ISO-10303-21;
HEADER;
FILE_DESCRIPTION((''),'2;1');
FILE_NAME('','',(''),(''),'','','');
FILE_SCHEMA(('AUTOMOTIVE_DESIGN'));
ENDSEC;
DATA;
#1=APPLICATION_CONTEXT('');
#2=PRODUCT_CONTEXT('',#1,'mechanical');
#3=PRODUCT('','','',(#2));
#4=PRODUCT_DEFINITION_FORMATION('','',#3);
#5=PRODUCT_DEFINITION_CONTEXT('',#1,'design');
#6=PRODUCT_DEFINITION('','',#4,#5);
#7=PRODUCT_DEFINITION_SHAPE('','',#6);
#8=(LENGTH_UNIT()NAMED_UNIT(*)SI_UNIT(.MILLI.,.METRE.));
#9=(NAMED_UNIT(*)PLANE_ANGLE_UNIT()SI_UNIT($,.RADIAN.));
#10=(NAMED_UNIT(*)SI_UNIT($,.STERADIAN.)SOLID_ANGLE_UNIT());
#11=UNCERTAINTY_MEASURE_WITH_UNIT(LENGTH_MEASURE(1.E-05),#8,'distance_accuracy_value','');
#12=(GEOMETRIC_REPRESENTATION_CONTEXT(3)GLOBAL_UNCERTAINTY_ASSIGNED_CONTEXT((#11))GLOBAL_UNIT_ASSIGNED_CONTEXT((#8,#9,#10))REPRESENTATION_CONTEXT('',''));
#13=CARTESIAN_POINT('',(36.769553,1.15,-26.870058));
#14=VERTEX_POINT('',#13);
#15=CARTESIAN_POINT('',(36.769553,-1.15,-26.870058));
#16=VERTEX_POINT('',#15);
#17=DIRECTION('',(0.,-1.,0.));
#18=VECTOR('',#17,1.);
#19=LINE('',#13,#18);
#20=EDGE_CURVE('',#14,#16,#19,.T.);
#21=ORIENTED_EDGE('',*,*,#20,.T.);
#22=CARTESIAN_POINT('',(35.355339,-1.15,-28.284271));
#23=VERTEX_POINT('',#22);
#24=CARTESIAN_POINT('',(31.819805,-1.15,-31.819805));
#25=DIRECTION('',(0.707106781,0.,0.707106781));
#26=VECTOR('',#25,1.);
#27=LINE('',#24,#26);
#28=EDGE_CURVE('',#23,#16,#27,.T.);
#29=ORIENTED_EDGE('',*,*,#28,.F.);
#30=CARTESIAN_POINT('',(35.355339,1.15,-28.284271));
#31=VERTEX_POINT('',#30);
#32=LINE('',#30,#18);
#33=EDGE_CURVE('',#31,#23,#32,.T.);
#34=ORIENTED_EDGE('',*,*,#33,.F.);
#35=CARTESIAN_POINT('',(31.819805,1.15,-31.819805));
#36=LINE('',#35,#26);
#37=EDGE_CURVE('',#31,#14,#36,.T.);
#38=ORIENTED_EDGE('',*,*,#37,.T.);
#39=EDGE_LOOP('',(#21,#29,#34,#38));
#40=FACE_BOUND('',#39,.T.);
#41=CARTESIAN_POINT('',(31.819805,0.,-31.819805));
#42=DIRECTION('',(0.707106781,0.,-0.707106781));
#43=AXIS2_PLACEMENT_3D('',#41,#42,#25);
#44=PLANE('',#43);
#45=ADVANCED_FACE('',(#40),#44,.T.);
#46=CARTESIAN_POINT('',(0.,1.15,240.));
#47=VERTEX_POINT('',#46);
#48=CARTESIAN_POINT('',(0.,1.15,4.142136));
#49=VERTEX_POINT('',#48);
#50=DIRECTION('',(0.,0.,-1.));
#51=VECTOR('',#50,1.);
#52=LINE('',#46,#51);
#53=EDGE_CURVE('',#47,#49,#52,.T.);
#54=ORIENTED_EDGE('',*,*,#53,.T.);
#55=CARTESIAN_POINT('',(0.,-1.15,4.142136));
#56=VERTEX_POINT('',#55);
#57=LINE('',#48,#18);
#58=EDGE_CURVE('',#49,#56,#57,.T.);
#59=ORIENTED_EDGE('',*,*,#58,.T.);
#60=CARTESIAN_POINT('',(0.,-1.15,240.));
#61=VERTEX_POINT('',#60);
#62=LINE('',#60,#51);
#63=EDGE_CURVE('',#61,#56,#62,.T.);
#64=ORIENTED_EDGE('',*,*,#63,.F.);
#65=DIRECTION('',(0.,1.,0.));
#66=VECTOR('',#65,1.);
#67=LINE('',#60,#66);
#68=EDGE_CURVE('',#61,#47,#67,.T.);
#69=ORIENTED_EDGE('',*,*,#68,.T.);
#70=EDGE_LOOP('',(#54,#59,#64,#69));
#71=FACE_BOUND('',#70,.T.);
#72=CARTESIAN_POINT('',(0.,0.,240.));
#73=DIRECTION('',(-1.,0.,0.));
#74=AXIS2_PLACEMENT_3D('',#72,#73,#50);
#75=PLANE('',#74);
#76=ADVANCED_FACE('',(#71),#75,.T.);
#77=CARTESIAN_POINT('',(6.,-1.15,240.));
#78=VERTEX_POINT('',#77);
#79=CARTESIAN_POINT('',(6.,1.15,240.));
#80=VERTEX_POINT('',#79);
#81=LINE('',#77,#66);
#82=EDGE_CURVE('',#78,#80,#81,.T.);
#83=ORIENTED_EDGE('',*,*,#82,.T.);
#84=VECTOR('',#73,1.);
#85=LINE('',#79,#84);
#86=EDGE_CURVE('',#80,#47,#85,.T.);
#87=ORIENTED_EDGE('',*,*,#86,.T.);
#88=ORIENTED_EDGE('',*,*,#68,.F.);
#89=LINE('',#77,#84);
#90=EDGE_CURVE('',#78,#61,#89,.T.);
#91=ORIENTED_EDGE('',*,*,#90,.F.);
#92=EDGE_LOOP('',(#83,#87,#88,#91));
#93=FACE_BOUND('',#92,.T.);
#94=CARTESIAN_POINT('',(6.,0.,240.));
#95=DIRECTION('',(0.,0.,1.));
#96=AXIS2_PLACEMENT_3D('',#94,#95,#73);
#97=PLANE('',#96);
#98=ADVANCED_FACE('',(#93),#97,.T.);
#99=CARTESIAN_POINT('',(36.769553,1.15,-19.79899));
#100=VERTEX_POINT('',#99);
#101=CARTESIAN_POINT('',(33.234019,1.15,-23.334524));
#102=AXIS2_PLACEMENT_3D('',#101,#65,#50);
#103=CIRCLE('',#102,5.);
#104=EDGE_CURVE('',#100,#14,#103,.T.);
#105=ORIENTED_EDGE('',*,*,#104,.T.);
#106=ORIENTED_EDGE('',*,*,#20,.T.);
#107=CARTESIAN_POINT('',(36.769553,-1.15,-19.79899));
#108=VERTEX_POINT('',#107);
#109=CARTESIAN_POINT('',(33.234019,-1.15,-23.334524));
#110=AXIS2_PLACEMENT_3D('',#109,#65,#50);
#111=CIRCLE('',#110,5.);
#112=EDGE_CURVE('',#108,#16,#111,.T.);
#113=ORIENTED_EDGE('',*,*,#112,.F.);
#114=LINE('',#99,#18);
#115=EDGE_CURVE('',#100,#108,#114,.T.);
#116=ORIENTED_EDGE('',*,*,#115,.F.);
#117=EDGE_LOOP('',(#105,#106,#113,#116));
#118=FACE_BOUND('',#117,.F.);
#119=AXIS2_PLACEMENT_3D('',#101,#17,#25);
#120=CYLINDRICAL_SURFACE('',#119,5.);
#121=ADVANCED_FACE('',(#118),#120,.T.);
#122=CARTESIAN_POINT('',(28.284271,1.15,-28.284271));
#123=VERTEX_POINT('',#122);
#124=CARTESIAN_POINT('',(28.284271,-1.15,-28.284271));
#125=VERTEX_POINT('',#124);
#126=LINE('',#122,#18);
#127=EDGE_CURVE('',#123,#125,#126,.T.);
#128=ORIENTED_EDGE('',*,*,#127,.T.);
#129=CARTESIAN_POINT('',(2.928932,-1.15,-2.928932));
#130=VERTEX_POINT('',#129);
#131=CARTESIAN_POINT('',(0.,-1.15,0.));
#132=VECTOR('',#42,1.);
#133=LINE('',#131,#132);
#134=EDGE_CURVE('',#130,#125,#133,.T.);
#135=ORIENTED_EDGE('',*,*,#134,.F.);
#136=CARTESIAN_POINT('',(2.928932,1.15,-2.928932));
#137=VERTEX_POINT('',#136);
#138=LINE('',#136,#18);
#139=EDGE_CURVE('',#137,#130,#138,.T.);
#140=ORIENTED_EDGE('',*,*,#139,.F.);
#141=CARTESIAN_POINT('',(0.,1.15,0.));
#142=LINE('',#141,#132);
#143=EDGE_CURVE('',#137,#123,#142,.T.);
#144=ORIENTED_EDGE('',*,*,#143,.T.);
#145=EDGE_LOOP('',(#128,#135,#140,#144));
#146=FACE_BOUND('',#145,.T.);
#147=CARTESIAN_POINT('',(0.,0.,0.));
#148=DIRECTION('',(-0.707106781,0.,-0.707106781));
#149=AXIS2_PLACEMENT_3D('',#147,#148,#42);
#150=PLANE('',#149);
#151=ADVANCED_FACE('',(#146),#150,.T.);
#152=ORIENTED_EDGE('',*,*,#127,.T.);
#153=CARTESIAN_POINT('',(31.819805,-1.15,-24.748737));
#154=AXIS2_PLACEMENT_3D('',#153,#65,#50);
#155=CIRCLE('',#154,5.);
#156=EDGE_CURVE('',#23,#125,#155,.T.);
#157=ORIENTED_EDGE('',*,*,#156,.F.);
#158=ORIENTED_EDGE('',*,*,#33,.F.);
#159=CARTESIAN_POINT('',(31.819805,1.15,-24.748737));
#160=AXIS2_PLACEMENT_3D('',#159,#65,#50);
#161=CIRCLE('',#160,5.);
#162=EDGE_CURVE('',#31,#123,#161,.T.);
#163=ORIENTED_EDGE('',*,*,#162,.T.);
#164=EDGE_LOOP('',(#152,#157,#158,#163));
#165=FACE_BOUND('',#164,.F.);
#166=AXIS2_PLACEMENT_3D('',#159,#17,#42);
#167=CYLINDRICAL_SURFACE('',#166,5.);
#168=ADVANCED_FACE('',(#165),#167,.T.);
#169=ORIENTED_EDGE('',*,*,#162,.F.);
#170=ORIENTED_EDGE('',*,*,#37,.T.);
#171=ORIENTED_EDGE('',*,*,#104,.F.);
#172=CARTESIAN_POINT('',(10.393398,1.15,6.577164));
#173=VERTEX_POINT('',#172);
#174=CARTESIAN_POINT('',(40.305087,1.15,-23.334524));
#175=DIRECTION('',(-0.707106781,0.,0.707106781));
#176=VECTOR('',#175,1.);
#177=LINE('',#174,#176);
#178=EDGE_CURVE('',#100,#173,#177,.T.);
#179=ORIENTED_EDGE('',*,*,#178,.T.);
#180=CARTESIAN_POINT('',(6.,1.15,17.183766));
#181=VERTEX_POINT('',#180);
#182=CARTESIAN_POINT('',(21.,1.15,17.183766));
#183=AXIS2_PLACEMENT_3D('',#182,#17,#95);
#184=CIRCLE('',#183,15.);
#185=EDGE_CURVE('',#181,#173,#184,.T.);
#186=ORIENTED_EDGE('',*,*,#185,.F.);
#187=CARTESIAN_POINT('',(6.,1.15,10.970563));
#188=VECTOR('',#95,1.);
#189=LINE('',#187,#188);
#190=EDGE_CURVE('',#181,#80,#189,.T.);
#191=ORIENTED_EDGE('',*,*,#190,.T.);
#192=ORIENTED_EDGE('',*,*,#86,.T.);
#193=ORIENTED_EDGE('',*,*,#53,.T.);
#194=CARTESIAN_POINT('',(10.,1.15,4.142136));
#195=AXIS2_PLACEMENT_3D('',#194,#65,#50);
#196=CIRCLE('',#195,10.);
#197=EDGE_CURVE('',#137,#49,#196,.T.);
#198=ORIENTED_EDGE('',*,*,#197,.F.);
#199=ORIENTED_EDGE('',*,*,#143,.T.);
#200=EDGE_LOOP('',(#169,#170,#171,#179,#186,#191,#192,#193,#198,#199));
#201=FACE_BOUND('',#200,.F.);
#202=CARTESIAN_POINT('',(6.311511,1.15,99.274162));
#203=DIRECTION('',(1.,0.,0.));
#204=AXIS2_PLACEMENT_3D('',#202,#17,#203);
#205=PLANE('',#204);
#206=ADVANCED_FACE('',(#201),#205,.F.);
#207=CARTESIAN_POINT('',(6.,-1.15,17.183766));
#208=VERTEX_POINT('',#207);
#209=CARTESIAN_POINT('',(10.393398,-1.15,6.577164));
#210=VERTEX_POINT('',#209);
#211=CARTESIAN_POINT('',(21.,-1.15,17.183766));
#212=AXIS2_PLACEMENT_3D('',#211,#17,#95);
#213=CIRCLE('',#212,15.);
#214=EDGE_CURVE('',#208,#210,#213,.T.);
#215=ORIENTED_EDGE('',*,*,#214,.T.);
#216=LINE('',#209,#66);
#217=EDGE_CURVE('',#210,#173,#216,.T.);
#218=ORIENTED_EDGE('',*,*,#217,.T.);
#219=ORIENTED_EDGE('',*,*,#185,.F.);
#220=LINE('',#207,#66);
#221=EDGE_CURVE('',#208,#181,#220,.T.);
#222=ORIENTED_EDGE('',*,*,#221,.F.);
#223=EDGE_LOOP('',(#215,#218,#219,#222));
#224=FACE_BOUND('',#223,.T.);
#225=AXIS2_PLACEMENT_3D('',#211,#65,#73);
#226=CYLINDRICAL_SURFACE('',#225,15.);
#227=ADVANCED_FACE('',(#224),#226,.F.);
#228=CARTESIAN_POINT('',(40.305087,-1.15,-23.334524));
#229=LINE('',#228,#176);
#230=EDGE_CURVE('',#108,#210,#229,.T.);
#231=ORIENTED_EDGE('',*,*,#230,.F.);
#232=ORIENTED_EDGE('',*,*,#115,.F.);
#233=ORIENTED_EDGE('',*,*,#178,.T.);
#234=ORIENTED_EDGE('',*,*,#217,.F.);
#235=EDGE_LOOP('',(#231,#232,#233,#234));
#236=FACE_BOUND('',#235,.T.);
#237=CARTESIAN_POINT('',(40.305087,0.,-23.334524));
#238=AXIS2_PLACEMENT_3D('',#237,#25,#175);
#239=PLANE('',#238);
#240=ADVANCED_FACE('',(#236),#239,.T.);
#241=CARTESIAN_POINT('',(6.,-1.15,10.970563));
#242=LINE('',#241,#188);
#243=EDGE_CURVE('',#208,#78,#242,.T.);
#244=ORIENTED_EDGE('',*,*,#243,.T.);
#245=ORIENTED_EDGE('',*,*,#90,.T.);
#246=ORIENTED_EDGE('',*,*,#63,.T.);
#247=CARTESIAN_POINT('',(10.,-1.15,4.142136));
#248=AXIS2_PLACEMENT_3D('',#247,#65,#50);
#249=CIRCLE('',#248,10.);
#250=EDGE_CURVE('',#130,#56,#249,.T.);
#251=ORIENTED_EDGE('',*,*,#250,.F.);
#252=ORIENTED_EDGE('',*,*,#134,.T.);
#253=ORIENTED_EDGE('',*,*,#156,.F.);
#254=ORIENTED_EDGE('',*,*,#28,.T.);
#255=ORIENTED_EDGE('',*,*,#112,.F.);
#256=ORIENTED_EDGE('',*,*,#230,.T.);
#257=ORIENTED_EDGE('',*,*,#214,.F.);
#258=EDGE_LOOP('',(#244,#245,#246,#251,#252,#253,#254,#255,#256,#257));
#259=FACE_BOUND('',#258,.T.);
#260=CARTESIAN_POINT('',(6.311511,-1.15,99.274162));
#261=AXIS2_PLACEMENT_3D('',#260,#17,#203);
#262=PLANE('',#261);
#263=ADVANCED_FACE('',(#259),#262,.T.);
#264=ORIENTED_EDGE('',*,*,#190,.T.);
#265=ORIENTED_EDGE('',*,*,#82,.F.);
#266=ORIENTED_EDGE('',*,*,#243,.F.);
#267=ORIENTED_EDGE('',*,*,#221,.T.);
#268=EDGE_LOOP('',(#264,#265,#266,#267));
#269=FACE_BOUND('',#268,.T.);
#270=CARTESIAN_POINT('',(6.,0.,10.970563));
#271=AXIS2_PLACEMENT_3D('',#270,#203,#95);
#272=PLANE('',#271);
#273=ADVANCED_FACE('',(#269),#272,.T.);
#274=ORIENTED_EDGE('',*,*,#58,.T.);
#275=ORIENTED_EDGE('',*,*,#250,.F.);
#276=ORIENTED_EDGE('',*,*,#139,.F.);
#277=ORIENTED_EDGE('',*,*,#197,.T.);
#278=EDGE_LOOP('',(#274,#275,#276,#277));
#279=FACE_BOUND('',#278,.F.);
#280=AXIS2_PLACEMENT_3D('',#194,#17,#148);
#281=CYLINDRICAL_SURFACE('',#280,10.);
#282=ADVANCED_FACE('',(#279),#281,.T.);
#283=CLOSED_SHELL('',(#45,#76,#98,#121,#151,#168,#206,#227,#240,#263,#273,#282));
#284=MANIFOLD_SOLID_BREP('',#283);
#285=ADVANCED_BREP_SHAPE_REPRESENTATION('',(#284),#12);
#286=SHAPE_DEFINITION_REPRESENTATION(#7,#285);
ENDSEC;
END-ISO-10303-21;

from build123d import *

# Parameters (mm, degrees)
F1_DEPTH = 1.15
F2_R     = 5
F3_R     = 10
F5_R     = 15


with BuildPart() as f1:
    # F0 (on Front) → F1 (new body, symmetric)
    with BuildSketch(Plane.XZ):
        Polygon((0, 240), (0, 0), (31.8198051534, -31.8198051534), (40.3050865276, -23.3345237792), (6, 10.9705627485), (6, 240), align=None)
    extrude(amount=F1_DEPTH, both=True)

    # F2
    f2_edges = [f1.edges().sort_by_distance(p)[0] for p in [
        (31.819805, 0, -31.819805),
        (40.305087, 0, -23.334524),
    ]]
    fillet(f2_edges, radius=F2_R)

    # F3
    f3_edges = [f1.edges().sort_by_distance(p)[0] for p in [
        (0, 0, 0),
    ]]
    fillet(f3_edges, radius=F3_R)

    # F5
    f5_edges = [f1.edges().sort_by_distance(p)[0] for p in [
        (6, 0, 10.970563),
    ]]
    fillet(f5_edges, radius=F5_R)


solid = f1.part
